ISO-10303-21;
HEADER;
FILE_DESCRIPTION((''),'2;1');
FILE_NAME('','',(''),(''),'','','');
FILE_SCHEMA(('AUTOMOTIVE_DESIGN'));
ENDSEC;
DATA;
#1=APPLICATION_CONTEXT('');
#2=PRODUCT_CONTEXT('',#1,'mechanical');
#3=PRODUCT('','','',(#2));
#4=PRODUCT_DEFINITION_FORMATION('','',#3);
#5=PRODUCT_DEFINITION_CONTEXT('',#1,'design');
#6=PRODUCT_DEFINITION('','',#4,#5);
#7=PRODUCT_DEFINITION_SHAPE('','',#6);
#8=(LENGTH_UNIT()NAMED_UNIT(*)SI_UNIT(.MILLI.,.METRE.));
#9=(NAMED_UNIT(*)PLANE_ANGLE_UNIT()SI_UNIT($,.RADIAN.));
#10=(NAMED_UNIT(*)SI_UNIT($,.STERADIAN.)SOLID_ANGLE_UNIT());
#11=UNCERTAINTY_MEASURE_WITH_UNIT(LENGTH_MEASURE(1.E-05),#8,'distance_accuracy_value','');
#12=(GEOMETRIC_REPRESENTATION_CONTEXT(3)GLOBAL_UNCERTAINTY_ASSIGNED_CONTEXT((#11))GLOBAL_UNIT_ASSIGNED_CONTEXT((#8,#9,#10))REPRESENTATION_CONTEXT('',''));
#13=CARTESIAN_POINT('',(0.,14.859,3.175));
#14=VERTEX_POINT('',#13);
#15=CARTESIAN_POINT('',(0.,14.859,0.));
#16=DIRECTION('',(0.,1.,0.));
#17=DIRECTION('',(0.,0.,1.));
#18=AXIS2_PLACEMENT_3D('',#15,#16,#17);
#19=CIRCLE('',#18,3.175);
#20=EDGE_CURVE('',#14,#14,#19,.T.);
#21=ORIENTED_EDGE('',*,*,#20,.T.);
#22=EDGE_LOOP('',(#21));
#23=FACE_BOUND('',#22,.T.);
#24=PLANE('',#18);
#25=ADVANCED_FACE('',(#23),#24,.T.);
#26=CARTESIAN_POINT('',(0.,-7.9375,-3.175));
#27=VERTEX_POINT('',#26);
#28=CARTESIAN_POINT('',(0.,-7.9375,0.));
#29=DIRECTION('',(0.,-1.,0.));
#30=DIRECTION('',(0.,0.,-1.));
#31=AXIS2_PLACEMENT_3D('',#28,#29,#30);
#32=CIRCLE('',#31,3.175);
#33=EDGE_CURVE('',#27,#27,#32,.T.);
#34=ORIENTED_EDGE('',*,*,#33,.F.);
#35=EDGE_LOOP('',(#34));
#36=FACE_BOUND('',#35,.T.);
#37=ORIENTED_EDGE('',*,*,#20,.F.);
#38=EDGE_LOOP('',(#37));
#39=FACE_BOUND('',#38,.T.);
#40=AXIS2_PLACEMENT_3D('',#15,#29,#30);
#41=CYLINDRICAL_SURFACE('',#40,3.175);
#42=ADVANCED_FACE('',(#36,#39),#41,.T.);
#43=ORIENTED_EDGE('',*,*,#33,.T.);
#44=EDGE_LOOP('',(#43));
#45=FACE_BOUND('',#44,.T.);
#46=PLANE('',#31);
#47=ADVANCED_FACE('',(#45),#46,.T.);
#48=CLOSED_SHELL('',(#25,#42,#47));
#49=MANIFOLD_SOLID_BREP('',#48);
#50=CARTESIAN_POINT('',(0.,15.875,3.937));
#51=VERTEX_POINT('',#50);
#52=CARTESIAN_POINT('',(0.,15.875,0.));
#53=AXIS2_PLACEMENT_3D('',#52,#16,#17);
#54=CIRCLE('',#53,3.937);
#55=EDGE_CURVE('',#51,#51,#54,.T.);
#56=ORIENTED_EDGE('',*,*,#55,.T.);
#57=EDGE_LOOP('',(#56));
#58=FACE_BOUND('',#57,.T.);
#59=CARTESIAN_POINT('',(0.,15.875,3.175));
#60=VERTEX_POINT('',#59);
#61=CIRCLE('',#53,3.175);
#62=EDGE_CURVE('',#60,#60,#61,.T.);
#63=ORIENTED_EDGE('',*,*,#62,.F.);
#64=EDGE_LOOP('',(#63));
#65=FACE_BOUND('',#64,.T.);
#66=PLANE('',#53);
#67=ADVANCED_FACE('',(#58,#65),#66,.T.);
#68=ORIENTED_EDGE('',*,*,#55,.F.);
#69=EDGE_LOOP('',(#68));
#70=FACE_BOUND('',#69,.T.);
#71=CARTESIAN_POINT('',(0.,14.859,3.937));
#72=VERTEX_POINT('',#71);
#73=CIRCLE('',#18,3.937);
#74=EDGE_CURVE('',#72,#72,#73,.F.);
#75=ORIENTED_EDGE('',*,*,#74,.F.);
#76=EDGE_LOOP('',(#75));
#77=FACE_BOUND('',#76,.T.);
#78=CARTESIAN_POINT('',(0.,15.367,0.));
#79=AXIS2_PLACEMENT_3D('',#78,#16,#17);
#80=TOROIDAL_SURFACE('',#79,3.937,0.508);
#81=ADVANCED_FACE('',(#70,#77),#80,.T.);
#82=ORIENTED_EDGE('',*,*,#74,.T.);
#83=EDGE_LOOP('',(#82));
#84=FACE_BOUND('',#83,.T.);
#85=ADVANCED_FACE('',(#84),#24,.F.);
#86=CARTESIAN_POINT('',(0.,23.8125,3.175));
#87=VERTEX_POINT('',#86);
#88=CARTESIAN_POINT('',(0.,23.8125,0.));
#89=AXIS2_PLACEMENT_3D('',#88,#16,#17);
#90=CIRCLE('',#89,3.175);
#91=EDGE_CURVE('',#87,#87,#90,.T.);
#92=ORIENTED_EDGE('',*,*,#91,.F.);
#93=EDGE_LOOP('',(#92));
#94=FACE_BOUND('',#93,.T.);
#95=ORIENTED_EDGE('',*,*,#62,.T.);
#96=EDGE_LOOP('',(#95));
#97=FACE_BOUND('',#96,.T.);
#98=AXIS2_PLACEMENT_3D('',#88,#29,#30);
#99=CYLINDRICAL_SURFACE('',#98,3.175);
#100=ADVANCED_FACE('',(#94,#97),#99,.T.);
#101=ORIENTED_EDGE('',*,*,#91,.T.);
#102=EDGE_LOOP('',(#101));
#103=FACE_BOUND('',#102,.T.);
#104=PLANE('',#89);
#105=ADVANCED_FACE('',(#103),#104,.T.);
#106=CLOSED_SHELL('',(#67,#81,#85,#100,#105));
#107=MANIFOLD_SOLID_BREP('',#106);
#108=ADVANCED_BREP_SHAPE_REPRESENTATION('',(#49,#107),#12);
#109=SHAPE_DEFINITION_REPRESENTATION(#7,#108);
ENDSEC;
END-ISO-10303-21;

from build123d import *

# Parameters (mm, degrees)
SKETCH2_R           = 3.175
BOSS_EXTRUDE1_DEPTH = 14.859
SKETCH3_R           = 4.445
BOSS_EXTRUDE2_DEPTH = 1.016
FILLET2_R           = 0.508
SKETCH4_R           = 3.175
BOSS_EXTRUDE3_DEPTH = 7.9375
BOSS_EXTRUDE4_START = 7.9375
SKETCH5_R           = 3.175
BOSS_EXTRUDE4_DEPTH = 7.9375


with BuildPart() as part:
    # Sketch2 → Boss-Extrude1 (new body)
    with BuildSketch(Plane(origin=(0, 0, 0), x_dir=(1, 0, 0), z_dir=(0, 1, 0))):
        with Locations(Location((0, 0, 0), (0, 0, 270))):
            Circle(SKETCH2_R)
    extrude(amount=BOSS_EXTRUDE1_DEPTH)

    # Sketch5 → Boss-Extrude4 (add)
    with BuildSketch(Plane.XZ.offset(BOSS_EXTRUDE4_START)):
        with Locations(Location((0, 0, 0), (0, 0, 90))):
            Circle(SKETCH5_R)
    extrude(amount=-BOSS_EXTRUDE4_DEPTH)


with BuildPart() as body_2:
    # Sketch3 → Boss-Extrude2 (new body)
    with BuildSketch(Plane(origin=(0, 14.859, 0), x_dir=(1, 0, 0), z_dir=(0, 1, 0))):
        with Locations(Location((0, 0, 0), (0, 0, 270))):
            Circle(SKETCH3_R)
    extrude(amount=BOSS_EXTRUDE2_DEPTH)

    # Fillet2
    fillet2_edges = [body_2.edges().sort_by_distance(p)[0] for p in [
        (0, 14.859, -4.445),
        (0, 15.875, -4.445),
    ]]
    fillet(fillet2_edges, radius=FILLET2_R - 0.0001)  # a hair under: the kernel refuses the full size

    # Sketch4 → Boss-Extrude3 (add)
    with BuildSketch(Plane(origin=(0, 15.875, 0), x_dir=(1, 0, 0), z_dir=(0, 1, 0))):
        with Locations(Location((0, 0, 0), (0, 0, 270))):
            Circle(SKETCH4_R)
    extrude(amount=BOSS_EXTRUDE3_DEPTH)


solid = Compound([part.part, body_2.part])
